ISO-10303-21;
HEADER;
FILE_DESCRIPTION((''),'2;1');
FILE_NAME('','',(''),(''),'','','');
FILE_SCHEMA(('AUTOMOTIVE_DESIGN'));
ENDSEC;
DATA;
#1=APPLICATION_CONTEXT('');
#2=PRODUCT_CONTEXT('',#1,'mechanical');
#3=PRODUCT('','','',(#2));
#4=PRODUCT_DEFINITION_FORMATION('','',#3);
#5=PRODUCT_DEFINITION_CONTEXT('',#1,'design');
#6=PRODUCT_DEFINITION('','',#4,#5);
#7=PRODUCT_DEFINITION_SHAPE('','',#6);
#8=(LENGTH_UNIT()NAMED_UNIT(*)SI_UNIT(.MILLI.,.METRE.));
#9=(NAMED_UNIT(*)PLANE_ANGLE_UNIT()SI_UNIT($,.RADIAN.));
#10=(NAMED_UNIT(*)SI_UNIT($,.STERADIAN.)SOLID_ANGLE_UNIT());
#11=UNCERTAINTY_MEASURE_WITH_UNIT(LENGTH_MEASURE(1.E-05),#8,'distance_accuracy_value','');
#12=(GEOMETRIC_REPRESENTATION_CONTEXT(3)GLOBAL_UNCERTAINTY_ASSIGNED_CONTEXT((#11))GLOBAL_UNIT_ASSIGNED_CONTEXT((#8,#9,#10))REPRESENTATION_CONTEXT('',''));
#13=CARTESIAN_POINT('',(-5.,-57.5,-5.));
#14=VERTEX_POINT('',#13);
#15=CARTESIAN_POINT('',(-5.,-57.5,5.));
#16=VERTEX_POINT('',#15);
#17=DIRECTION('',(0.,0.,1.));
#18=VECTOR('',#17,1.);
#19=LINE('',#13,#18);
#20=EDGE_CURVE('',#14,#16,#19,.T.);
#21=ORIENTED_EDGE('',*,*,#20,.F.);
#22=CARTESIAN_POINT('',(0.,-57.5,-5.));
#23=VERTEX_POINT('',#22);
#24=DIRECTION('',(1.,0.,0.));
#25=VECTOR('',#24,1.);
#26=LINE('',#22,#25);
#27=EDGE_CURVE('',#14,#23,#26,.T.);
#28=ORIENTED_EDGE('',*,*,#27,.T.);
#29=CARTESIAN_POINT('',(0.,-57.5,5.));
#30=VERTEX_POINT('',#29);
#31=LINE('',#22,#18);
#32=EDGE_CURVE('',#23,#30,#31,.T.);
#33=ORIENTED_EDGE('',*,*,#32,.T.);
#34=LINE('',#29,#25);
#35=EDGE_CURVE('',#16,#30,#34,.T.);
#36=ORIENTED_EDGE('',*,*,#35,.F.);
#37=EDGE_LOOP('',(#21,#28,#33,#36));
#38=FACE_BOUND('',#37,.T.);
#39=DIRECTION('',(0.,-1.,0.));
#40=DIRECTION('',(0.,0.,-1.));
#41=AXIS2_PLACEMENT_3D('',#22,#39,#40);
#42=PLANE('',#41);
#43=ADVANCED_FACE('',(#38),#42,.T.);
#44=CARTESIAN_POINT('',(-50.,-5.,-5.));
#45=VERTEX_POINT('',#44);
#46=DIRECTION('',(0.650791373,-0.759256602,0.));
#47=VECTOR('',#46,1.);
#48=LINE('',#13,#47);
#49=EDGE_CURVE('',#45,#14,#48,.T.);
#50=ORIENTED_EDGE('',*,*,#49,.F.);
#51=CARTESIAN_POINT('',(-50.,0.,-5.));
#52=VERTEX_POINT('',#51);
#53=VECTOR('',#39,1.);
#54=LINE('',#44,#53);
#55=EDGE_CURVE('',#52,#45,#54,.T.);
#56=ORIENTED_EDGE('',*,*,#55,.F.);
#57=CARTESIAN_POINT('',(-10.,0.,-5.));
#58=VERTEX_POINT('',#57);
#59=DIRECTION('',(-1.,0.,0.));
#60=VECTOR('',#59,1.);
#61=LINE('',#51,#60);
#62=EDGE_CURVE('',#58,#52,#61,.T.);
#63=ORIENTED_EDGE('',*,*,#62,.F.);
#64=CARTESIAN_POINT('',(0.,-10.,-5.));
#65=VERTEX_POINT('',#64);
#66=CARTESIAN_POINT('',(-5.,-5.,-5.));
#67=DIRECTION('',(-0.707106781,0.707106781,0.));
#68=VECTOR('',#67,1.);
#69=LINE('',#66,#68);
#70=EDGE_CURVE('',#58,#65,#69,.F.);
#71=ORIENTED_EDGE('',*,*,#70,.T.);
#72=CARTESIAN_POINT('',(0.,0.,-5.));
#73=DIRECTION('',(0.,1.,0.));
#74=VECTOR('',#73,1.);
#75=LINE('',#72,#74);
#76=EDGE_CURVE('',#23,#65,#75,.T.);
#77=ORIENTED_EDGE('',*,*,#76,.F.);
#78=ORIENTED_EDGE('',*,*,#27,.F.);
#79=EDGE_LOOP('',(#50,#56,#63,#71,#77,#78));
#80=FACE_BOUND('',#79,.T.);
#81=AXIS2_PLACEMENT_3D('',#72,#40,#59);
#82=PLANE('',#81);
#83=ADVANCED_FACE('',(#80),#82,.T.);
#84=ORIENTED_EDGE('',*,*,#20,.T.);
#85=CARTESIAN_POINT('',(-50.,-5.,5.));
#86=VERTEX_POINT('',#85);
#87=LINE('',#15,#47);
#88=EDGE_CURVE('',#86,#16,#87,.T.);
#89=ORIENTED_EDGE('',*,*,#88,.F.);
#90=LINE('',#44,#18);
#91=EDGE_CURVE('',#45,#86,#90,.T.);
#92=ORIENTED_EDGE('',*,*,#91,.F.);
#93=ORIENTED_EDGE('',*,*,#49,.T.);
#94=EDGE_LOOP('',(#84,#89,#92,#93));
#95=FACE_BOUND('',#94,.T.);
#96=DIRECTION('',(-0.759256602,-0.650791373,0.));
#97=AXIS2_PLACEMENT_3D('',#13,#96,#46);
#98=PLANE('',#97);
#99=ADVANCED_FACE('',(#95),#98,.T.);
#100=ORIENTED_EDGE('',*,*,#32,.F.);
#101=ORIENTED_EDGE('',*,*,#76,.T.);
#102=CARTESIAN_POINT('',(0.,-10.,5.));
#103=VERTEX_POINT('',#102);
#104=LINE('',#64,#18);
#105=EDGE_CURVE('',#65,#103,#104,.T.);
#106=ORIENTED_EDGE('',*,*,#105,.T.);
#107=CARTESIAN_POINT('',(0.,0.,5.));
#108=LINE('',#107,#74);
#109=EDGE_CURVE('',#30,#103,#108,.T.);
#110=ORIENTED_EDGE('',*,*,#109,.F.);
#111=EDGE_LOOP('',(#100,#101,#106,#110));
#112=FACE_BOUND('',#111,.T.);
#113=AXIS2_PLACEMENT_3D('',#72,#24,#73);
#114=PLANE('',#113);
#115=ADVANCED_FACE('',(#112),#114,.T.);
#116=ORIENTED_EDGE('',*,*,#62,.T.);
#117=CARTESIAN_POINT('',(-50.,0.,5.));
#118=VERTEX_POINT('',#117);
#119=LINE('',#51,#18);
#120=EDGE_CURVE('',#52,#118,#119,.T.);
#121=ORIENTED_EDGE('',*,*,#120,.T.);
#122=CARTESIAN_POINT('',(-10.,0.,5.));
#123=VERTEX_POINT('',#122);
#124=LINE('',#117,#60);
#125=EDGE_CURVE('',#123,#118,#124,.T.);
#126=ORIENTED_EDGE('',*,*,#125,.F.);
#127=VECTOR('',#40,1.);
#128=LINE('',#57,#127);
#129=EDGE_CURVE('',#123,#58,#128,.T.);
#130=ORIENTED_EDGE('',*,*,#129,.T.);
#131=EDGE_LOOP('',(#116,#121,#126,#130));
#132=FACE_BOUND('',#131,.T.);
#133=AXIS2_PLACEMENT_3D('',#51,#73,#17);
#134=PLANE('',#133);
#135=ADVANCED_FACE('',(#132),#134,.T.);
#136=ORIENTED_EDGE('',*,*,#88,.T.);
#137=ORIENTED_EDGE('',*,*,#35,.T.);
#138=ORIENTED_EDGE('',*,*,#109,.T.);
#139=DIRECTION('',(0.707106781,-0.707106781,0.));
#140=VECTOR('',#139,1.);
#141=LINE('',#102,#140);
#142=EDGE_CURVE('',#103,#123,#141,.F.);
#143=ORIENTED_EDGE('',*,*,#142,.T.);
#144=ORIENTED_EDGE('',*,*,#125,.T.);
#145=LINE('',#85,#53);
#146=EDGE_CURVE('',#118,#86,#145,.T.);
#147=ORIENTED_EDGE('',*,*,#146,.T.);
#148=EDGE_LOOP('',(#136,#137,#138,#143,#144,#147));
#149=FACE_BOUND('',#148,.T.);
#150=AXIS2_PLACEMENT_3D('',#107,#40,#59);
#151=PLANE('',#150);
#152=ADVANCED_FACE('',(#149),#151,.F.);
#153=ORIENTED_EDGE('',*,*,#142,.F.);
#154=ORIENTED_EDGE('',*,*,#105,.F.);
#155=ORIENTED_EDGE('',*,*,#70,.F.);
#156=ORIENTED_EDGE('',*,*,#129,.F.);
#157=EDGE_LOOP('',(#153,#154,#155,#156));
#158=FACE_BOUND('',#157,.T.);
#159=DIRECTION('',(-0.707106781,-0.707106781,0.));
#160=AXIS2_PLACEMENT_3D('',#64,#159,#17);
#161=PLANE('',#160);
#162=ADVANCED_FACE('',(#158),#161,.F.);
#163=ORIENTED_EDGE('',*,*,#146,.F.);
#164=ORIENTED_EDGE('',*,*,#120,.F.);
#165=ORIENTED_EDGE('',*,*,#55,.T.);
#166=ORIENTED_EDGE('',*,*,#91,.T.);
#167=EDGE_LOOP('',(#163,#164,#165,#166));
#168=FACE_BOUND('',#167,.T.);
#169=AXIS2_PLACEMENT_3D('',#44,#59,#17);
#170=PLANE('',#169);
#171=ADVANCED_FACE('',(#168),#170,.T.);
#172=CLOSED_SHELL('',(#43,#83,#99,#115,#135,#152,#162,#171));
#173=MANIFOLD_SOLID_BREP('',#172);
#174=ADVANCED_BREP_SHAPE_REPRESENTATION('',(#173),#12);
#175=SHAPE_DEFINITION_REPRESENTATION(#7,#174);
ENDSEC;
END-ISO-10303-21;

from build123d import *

# Parameters (mm, degrees)
SM_START               = -5
SM_BASE_FLANGE_1_DEPTH = 10
CHAMFER_1_SIZE         = 10


# Read off the part's stored shape, not the designer's step: Базовая кромка1
with BuildPart() as part:
    # Базовая кромка1 outline → Базовая кромка1 (new body)
    with BuildSketch(Plane.XY.offset(SM_START)):
        Polygon((0, 0), (-50, 0), (-50, -5), (-5, -57.5), (0, -57.5), align=None)
    extrude(amount=SM_BASE_FLANGE_1_DEPTH)

    # Фаска1
    chamfer_1_edges = [part.edges().sort_by_distance(p)[0] for p in [
        (0, 0, 0),
    ]]
    chamfer(chamfer_1_edges, length=CHAMFER_1_SIZE)


solid = part.part
